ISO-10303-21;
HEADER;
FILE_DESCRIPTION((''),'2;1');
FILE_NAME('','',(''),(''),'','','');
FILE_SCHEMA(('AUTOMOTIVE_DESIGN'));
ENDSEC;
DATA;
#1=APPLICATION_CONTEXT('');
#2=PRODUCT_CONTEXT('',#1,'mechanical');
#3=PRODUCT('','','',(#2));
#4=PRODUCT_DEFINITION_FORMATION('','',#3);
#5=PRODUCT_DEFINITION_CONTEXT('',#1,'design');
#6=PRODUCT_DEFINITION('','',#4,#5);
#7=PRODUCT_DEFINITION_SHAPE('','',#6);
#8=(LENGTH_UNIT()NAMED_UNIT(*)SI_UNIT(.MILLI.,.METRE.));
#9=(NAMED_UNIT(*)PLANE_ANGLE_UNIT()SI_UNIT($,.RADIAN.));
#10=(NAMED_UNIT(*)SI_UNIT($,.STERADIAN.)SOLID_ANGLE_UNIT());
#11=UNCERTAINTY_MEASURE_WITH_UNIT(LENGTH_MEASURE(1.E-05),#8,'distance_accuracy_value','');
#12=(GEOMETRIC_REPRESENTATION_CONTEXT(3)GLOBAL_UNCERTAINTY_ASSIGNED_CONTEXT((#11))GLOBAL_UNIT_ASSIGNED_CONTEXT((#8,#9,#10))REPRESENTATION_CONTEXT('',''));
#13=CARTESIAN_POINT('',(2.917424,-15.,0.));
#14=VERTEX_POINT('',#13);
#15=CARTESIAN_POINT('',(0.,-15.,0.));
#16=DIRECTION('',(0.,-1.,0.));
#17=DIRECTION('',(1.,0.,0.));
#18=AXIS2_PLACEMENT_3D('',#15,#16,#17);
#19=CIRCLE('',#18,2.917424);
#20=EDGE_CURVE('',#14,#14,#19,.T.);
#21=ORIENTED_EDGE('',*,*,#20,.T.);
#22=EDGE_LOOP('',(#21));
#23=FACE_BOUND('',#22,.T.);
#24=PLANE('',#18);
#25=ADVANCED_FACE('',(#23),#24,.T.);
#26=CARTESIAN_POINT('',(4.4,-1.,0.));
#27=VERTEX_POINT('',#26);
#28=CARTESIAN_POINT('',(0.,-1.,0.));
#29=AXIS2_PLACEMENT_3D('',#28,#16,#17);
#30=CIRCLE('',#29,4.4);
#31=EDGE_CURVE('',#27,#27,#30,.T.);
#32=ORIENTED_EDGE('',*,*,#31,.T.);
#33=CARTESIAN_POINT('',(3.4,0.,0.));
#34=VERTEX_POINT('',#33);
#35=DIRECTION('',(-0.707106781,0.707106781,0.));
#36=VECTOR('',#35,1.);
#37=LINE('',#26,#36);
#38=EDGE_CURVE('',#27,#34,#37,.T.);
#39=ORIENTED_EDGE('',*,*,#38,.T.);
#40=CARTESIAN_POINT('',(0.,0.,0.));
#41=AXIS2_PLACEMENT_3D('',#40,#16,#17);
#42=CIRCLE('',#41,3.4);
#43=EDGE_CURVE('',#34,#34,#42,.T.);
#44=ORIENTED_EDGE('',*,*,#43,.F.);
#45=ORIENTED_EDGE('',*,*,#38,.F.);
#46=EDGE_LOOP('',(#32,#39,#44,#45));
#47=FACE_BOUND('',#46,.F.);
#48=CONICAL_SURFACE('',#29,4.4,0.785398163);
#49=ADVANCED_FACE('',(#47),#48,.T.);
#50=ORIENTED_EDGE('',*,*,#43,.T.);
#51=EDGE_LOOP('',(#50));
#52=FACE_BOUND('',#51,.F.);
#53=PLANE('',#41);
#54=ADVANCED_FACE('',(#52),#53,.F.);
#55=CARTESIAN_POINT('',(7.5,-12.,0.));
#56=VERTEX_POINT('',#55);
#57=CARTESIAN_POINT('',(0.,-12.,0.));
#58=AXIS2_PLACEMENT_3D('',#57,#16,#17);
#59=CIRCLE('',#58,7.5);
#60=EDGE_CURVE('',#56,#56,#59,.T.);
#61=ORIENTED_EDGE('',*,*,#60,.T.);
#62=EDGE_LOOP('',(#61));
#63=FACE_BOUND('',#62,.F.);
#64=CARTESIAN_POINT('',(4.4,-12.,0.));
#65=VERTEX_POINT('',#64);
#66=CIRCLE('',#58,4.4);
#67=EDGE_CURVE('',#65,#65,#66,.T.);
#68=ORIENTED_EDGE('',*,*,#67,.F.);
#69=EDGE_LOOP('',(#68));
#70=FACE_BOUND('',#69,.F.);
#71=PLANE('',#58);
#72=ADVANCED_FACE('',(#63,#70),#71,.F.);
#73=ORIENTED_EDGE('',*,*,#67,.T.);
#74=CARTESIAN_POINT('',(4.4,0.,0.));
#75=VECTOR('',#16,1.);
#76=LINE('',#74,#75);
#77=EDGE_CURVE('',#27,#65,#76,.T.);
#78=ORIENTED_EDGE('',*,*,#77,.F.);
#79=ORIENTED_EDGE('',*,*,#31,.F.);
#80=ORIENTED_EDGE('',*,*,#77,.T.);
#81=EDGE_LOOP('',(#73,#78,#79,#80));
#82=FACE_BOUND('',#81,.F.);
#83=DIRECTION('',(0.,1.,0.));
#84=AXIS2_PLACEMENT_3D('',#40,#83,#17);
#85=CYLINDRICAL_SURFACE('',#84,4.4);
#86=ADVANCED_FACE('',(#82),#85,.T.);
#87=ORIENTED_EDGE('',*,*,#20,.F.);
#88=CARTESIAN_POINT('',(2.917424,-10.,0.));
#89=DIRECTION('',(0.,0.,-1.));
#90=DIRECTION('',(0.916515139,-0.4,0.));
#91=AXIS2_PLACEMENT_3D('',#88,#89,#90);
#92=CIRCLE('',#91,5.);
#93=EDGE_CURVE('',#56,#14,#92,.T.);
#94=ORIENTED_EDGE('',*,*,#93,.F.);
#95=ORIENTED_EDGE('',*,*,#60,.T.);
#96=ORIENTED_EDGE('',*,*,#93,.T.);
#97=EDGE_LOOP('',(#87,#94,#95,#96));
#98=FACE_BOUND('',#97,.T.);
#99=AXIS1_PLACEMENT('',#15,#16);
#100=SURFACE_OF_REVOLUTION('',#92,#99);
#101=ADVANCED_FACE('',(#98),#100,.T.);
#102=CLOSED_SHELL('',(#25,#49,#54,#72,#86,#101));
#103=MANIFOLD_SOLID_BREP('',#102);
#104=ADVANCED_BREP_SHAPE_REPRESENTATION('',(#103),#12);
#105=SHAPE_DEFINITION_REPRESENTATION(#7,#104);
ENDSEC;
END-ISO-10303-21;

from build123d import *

# Parameters (mm, degrees)
F0_R     = 4.4
F1_DEPTH = 12
F2_R     = 7.5
F2_R_2   = 4.4
F3_DEPTH = 3
F5_SIZE  = 1


# Not quite as in the source:
# - a fillet or chamfer that OpenCascade refuses, or shapes differently, is made with other operations: its cross-section is extruded or revolved along the edge and cut away or added


with BuildPart() as f1:
    # F0 (on Front) → F1 (new body)
    with BuildSketch(Plane.XZ):
        Circle(F0_R)
    extrude(amount=F1_DEPTH)

    # F2 (on face) → F3 (join)
    with BuildSketch(Plane.XZ.offset(12)):
        Circle(F2_R)
        Circle(F2_R_2, mode=Mode.SUBTRACT)
        Circle(F2_R)
    extrude(amount=F3_DEPTH)

    # F4: fillet of radius 5 on 1 edges, made by hand

    # F4_s1 → F4_t2 (revolve, cut)
    with BuildSketch(Plane.XY):
        with BuildLine():
            ThreePointArc((7.5, -12), (5.6560370926, -14.1833001327), (2.917424305, -15))
            Line((2.917424305, -15), (7.5, -15))
            Line((7.5, -15), (7.5, -12))
        make_face()
    revolve(axis=Axis((0, -15, 0), (0, -1, 0)), mode=Mode.SUBTRACT)

    # F5
    f5_edges = [f1.edges().sort_by_distance(p)[0] for p in [
        (-4.4, 0, 0),
    ]]
    chamfer(f5_edges, length=F5_SIZE)


solid = f1.part
